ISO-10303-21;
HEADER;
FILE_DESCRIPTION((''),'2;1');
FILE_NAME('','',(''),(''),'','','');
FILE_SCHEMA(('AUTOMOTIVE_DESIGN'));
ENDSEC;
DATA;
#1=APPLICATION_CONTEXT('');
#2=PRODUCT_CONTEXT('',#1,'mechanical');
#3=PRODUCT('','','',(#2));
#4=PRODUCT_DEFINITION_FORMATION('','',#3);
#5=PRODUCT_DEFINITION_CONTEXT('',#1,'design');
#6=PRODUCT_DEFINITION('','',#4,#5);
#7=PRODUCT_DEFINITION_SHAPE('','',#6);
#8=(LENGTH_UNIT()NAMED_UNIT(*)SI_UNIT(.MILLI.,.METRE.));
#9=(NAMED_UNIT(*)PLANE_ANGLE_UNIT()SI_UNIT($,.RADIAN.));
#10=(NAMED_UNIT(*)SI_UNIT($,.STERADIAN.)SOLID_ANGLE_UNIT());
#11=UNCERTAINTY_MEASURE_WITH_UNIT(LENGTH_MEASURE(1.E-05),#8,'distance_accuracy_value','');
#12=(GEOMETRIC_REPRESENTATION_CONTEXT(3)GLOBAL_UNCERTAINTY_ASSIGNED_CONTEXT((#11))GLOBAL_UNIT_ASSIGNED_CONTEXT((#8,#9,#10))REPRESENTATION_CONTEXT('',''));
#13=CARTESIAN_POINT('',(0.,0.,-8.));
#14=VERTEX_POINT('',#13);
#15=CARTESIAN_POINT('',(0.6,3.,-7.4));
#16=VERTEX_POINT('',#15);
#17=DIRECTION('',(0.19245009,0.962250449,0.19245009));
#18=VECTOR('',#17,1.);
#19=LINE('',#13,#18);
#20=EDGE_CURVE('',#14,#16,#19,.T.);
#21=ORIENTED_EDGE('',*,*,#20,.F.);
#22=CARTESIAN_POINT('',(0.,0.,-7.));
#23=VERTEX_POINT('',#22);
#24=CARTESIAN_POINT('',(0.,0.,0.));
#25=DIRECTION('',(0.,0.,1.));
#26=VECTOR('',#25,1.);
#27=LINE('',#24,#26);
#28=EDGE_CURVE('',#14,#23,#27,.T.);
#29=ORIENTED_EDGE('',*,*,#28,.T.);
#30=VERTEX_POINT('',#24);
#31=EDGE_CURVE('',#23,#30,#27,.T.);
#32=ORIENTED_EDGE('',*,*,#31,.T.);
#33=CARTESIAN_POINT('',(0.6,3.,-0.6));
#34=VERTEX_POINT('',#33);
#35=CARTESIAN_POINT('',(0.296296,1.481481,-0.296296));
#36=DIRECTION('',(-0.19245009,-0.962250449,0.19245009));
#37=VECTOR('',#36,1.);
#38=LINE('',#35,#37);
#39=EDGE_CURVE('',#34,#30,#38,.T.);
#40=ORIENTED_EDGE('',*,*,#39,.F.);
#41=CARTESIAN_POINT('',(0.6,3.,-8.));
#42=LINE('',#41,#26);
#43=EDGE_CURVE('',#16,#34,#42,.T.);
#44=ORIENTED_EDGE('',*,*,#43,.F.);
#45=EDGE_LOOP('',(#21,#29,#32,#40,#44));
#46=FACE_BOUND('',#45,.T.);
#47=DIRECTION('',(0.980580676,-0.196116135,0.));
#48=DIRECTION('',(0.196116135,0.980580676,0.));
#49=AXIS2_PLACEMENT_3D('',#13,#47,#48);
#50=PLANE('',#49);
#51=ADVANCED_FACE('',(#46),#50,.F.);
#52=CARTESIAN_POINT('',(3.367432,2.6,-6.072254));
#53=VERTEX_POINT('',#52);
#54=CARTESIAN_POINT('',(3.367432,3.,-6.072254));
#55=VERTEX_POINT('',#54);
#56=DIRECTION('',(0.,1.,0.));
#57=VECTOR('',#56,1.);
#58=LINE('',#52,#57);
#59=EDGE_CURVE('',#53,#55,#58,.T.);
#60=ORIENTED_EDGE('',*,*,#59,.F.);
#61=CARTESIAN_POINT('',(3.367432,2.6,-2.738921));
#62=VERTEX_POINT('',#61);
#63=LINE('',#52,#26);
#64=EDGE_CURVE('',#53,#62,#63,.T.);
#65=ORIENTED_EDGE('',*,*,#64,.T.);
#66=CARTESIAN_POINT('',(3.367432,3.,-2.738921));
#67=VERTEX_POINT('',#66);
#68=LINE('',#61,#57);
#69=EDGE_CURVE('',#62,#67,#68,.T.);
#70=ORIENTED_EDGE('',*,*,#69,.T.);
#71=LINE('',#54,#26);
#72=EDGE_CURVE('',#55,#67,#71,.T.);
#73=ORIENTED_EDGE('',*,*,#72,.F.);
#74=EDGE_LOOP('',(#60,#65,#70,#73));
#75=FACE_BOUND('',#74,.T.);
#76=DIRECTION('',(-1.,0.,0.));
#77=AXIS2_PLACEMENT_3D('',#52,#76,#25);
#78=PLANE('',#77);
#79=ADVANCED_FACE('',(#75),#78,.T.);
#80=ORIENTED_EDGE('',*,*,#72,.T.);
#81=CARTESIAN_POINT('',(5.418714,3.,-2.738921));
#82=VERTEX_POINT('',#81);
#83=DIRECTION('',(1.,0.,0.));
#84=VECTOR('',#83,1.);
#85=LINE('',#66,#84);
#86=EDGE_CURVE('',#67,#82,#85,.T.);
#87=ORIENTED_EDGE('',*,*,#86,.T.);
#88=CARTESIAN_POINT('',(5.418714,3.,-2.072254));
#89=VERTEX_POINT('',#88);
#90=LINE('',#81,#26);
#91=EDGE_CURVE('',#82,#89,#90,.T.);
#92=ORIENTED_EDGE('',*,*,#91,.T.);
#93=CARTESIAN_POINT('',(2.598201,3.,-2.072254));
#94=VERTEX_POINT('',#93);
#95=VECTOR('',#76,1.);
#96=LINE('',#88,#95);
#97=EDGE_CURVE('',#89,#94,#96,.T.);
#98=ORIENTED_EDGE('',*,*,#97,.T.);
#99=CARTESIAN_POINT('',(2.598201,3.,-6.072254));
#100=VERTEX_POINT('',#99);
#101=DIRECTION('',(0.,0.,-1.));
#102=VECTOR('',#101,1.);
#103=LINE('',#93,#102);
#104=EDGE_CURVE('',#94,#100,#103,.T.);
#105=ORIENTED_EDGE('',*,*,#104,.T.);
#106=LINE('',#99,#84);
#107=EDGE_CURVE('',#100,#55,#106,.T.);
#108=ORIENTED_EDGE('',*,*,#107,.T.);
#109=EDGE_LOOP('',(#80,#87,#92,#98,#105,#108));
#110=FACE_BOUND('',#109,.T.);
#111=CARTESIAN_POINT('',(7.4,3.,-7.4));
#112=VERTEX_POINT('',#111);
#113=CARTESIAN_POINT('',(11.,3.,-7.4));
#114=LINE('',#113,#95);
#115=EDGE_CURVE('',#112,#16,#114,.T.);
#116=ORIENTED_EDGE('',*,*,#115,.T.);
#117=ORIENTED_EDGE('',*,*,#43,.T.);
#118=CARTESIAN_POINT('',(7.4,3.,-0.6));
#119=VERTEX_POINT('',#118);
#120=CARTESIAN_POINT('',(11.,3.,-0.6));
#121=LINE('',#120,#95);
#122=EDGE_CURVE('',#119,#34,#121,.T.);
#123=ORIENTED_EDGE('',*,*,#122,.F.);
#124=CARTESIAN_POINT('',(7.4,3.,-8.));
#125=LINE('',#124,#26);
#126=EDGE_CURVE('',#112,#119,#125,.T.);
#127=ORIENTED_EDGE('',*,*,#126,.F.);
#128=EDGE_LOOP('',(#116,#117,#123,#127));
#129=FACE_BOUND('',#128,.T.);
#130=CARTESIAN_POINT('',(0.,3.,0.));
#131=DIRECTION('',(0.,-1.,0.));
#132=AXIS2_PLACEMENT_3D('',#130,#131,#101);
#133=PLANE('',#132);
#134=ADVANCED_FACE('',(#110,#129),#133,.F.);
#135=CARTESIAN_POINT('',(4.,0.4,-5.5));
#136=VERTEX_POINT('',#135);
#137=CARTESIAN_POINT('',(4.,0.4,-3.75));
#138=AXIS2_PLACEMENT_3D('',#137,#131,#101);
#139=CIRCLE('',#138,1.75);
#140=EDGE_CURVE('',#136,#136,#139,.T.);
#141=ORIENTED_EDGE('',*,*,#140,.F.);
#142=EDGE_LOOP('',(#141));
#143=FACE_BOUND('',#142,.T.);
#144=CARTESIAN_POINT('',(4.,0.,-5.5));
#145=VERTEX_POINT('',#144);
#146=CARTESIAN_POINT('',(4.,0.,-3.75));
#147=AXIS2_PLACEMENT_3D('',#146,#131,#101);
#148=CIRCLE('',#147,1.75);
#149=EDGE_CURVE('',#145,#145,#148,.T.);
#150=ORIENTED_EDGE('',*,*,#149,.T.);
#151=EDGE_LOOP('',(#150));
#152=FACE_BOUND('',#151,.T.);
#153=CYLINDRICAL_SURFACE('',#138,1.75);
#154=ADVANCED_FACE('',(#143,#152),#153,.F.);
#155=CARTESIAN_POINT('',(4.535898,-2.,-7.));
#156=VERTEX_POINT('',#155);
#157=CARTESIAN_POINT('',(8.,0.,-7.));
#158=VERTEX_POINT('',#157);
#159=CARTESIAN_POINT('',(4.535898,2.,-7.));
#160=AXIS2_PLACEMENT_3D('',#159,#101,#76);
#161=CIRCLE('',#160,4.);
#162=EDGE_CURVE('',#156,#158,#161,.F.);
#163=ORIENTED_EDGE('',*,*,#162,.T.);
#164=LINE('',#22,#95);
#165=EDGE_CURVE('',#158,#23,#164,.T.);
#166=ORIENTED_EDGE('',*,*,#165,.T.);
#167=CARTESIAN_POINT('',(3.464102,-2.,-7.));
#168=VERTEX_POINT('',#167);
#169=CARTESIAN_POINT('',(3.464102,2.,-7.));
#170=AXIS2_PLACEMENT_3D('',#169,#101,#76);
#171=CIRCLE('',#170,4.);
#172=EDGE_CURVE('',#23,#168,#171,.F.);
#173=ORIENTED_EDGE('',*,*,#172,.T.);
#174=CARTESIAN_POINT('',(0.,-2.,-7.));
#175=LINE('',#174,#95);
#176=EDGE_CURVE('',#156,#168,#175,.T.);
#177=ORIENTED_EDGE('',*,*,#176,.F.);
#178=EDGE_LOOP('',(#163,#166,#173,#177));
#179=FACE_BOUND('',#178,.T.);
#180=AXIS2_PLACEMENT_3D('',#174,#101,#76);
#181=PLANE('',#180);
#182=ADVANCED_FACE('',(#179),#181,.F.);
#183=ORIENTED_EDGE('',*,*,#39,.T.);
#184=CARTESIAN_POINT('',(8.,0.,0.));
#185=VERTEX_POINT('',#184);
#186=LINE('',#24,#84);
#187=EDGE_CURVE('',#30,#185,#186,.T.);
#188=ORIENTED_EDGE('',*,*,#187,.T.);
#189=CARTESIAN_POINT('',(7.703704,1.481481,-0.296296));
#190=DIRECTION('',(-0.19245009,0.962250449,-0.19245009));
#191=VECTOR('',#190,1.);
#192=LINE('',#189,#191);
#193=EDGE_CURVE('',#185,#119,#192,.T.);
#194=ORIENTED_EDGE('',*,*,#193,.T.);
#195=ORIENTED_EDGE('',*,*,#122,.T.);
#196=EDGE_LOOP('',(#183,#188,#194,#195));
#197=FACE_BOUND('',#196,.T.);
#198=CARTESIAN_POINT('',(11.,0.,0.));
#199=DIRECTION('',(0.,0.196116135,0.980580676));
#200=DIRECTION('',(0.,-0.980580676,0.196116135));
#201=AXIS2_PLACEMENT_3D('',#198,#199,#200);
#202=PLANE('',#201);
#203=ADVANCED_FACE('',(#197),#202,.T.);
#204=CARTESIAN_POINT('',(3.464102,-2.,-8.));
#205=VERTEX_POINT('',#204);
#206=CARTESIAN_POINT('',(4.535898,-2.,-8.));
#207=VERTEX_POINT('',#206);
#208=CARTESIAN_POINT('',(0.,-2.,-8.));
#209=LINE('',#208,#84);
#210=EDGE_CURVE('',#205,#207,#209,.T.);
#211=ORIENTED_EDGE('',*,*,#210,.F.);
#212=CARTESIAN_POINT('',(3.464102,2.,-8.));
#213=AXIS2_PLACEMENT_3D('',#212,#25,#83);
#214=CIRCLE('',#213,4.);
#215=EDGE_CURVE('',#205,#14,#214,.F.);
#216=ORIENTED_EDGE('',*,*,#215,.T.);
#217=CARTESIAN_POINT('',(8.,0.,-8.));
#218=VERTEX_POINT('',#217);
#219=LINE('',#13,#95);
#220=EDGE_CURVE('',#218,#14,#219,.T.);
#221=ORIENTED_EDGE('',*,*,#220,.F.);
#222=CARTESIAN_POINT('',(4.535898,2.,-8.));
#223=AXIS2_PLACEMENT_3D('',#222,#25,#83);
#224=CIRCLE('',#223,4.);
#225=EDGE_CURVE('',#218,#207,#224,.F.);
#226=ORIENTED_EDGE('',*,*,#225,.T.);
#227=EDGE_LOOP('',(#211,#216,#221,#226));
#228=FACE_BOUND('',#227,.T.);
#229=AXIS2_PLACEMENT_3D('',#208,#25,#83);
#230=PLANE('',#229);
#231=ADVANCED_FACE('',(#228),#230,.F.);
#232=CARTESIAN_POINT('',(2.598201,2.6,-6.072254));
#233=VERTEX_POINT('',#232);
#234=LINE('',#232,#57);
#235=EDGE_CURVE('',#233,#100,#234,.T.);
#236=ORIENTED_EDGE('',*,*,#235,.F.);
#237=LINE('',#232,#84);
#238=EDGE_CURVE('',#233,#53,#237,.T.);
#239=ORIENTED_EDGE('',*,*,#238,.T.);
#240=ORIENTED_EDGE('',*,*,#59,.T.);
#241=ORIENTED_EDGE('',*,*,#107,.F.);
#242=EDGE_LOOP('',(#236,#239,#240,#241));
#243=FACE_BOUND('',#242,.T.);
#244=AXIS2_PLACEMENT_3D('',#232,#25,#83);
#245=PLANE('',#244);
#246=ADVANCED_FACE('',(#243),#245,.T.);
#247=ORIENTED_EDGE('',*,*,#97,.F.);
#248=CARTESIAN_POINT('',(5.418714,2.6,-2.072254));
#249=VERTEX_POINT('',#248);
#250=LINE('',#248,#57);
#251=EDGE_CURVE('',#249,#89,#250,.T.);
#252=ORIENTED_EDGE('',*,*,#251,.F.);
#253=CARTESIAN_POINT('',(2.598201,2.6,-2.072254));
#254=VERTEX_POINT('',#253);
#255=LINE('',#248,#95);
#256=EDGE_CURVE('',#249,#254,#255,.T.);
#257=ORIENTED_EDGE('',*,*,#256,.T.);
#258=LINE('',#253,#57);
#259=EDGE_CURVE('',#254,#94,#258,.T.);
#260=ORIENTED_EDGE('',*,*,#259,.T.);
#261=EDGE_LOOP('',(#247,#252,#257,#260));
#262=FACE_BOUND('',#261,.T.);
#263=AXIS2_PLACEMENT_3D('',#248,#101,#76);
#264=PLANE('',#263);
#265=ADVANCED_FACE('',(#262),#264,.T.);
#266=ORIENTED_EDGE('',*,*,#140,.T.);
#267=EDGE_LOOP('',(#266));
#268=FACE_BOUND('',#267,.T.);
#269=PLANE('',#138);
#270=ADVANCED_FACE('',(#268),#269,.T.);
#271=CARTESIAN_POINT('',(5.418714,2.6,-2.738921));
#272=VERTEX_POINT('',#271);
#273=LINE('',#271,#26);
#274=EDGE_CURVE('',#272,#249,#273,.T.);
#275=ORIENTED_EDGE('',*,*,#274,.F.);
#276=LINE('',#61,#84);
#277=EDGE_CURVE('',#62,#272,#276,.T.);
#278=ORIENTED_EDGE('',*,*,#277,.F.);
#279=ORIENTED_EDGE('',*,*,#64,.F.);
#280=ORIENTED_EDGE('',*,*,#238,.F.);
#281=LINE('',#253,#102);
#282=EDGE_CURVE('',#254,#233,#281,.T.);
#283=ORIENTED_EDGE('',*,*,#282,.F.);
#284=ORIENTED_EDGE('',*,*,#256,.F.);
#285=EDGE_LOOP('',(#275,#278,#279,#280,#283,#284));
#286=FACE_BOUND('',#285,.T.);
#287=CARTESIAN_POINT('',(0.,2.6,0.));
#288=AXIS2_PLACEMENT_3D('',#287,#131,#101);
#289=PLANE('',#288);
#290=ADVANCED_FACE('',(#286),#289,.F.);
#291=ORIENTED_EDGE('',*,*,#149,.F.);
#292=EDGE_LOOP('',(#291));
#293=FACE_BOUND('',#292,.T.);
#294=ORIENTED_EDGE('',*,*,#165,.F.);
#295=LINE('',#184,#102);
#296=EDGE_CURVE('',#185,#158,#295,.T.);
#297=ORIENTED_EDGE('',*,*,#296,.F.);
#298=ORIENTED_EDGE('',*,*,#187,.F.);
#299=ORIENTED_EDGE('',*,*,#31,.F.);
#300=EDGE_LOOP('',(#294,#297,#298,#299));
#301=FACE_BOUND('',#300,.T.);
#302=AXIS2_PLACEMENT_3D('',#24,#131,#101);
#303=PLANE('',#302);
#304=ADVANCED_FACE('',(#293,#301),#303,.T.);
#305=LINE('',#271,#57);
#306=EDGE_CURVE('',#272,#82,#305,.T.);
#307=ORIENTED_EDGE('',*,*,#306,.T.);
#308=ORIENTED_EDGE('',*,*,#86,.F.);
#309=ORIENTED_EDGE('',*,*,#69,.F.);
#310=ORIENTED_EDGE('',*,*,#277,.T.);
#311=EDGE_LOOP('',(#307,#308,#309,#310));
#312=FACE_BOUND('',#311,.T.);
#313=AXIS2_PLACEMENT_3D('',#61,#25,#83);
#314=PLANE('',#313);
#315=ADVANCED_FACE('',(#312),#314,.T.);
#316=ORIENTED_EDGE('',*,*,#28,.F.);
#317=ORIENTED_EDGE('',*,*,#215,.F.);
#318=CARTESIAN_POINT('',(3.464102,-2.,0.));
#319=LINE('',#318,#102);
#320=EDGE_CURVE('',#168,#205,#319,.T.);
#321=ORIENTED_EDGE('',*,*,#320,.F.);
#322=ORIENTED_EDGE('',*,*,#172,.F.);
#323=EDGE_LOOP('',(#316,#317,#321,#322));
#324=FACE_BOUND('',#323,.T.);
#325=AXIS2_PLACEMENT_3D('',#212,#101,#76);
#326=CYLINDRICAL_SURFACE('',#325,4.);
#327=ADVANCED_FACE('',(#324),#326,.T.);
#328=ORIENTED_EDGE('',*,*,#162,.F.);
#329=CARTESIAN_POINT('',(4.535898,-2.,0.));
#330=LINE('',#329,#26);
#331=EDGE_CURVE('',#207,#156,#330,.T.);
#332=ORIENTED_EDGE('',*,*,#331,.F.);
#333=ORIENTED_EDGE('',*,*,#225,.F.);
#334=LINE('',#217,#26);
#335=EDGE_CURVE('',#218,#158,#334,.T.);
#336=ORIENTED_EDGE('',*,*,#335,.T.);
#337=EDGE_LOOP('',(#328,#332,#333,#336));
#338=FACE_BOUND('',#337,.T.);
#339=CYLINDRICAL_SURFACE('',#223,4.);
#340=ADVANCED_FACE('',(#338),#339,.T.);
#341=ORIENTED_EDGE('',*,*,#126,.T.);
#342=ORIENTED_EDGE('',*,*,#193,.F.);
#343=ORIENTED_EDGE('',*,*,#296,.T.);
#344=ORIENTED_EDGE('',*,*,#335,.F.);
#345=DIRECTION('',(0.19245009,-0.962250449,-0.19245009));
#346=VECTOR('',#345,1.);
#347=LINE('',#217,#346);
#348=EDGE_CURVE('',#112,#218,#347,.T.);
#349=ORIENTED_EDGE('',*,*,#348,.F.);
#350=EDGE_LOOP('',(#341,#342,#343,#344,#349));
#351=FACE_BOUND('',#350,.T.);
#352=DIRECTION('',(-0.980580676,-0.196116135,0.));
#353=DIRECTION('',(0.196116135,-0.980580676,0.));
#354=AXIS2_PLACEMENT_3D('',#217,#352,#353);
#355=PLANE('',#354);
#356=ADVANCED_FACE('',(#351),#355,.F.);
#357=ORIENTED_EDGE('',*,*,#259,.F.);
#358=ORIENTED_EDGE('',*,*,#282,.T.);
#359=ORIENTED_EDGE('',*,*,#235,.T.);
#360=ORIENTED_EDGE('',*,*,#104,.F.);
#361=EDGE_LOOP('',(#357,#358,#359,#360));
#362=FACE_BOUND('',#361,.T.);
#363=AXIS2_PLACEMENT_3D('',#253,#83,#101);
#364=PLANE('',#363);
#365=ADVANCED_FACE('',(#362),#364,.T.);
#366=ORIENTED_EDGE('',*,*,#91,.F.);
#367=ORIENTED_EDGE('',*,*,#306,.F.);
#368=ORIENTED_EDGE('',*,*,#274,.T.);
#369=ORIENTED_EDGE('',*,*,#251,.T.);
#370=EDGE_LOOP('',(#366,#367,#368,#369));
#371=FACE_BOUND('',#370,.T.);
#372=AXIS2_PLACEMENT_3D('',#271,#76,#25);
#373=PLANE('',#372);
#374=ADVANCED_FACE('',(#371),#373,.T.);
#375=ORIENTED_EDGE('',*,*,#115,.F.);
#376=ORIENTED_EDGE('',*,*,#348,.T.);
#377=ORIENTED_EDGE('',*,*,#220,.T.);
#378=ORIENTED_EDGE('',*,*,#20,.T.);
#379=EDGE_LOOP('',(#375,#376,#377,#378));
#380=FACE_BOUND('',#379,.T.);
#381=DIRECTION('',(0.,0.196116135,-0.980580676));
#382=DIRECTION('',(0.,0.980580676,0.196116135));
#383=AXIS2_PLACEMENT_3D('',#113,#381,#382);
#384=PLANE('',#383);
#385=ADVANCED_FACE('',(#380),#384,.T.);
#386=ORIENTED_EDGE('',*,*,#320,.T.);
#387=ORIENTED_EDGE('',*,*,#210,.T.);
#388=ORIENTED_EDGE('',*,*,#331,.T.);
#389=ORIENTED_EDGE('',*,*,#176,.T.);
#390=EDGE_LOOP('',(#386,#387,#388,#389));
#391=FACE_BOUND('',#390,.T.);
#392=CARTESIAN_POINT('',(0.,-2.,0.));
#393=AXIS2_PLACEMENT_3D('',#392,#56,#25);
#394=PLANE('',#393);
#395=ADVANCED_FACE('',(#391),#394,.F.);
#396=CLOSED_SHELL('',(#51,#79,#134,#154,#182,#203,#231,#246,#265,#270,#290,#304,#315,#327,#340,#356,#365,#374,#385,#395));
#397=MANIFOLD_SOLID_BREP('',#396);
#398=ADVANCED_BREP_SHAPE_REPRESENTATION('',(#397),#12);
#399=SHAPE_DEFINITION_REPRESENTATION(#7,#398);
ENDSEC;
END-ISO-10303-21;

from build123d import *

# Parameters (mm, degrees)
SKETCH1_W               = 8
SKETCH1_H               = 8
BOSS_EXTRUDE1_DEPTH     = 3
CUT_EXTRUDE1_DEPTH      = 12.704699911
CUT_EXTRUDE1_DEPTH_BACK = 12.704699911
CUT_EXTRUDE2_DEPTH      = 11
SKETCH4_R               = 1.75
CUT_EXTRUDE3_DEPTH      = 0.4
SKETCH5_W               = 8
SKETCH5_H               = 1
BOSS_EXTRUDE2_DEPTH     = 2
FILLET1_R               = 4
CUT_EXTRUDE4_DEPTH      = 0.4


with BuildPart() as part:
    # Sketch1 → Boss-Extrude1 (new body)
    with BuildSketch(Plane(origin=(0, 0, 0), x_dir=(1, 0, 0), z_dir=(0, 1, 0))):
        with Locations((4, 4)):
            Rectangle(SKETCH1_W, SKETCH1_H)
    extrude(amount=BOSS_EXTRUDE1_DEPTH)

    # Sketch2 → Cut-Extrude1 (cut, two sides: drawn at the far end of the back side and taken through both)
    with BuildSketch(Plane.XY.offset(-CUT_EXTRUDE1_DEPTH_BACK)):
        Polygon((0, 0), (0.6, 3), (0, 3), align=None)
        Polygon((8, 0), (7.4, 3), (8, 3), align=None)
    extrude(amount=CUT_EXTRUDE1_DEPTH + CUT_EXTRUDE1_DEPTH_BACK, mode=Mode.SUBTRACT)

    # Sketch3 → Cut-Extrude2 (cut)
    with BuildSketch(Plane(origin=(0, 0, 0), x_dir=(0, 0, -1), z_dir=(1, 0, 0))):
        Polygon((0, 0), (0.6, 3), (0, 3), align=None)
        Polygon((8, 3), (7.4, 3), (8, 0), align=None)
    extrude(amount=CUT_EXTRUDE2_DEPTH, mode=Mode.SUBTRACT)

    # Sketch4 → Cut-Extrude3 (cut)
    with BuildSketch(Plane.XZ):
        with Locations(Location((4, -3.75, 0), (0, 0, 270))):
            Circle(SKETCH4_R)
    extrude(amount=-CUT_EXTRUDE3_DEPTH, mode=Mode.SUBTRACT)

    # Sketch5 → Boss-Extrude2 (add)
    with BuildSketch(Plane.XZ):
        with Locations((4, -7.5)):
            Rectangle(SKETCH5_W, SKETCH5_H)
    extrude(amount=BOSS_EXTRUDE2_DEPTH)

    # Fillet1
    # the kernel refuses this fillet: 4 mm, written as the material it takes off along each edge
    with BuildSketch(Plane(origin=(8, -2, -16.660254038), x_dir=(0, 1, 0), z_dir=(0, 0, 1)), Plane(origin=(0, -2, 1.660254038), x_dir=(0, 1, 0), z_dir=(0, 0, -1))) as fillet1_piece_1:
        with BuildLine():
            CenterArc((4, 3.464101615), FILLET1_R, 180, 60)
            Line((0, 3.464101615), (-0.08, 3.464101615))
            Line((-0.08, 3.464101615), (-0.08, 0))
            Line((-0.08, 0), (0, -0.08))
            ThreePointArc((0, -0.08), (1, -0.08), (1.96, -0.069282032))
            Line((1.96, -0.069282032), (2, 0))
        make_face()
    extrude(amount=18.320508076, mode=Mode.SUBTRACT)

    # Sketch6 → Cut-Extrude4 (cut)
    with BuildSketch(Plane(origin=(0, 3, 0), x_dir=(1, 0, 0), z_dir=(0, 1, 0))):
        Polygon((2.598201218, 2.07225421), (2.598201218, 6.07225421), (3.367431987, 6.07225421), (3.367431987, 2.738920877), (5.418714038, 2.738920877), (5.418714038, 2.07225421), align=None)
    extrude(amount=-CUT_EXTRUDE4_DEPTH, mode=Mode.SUBTRACT)


solid = part.part
